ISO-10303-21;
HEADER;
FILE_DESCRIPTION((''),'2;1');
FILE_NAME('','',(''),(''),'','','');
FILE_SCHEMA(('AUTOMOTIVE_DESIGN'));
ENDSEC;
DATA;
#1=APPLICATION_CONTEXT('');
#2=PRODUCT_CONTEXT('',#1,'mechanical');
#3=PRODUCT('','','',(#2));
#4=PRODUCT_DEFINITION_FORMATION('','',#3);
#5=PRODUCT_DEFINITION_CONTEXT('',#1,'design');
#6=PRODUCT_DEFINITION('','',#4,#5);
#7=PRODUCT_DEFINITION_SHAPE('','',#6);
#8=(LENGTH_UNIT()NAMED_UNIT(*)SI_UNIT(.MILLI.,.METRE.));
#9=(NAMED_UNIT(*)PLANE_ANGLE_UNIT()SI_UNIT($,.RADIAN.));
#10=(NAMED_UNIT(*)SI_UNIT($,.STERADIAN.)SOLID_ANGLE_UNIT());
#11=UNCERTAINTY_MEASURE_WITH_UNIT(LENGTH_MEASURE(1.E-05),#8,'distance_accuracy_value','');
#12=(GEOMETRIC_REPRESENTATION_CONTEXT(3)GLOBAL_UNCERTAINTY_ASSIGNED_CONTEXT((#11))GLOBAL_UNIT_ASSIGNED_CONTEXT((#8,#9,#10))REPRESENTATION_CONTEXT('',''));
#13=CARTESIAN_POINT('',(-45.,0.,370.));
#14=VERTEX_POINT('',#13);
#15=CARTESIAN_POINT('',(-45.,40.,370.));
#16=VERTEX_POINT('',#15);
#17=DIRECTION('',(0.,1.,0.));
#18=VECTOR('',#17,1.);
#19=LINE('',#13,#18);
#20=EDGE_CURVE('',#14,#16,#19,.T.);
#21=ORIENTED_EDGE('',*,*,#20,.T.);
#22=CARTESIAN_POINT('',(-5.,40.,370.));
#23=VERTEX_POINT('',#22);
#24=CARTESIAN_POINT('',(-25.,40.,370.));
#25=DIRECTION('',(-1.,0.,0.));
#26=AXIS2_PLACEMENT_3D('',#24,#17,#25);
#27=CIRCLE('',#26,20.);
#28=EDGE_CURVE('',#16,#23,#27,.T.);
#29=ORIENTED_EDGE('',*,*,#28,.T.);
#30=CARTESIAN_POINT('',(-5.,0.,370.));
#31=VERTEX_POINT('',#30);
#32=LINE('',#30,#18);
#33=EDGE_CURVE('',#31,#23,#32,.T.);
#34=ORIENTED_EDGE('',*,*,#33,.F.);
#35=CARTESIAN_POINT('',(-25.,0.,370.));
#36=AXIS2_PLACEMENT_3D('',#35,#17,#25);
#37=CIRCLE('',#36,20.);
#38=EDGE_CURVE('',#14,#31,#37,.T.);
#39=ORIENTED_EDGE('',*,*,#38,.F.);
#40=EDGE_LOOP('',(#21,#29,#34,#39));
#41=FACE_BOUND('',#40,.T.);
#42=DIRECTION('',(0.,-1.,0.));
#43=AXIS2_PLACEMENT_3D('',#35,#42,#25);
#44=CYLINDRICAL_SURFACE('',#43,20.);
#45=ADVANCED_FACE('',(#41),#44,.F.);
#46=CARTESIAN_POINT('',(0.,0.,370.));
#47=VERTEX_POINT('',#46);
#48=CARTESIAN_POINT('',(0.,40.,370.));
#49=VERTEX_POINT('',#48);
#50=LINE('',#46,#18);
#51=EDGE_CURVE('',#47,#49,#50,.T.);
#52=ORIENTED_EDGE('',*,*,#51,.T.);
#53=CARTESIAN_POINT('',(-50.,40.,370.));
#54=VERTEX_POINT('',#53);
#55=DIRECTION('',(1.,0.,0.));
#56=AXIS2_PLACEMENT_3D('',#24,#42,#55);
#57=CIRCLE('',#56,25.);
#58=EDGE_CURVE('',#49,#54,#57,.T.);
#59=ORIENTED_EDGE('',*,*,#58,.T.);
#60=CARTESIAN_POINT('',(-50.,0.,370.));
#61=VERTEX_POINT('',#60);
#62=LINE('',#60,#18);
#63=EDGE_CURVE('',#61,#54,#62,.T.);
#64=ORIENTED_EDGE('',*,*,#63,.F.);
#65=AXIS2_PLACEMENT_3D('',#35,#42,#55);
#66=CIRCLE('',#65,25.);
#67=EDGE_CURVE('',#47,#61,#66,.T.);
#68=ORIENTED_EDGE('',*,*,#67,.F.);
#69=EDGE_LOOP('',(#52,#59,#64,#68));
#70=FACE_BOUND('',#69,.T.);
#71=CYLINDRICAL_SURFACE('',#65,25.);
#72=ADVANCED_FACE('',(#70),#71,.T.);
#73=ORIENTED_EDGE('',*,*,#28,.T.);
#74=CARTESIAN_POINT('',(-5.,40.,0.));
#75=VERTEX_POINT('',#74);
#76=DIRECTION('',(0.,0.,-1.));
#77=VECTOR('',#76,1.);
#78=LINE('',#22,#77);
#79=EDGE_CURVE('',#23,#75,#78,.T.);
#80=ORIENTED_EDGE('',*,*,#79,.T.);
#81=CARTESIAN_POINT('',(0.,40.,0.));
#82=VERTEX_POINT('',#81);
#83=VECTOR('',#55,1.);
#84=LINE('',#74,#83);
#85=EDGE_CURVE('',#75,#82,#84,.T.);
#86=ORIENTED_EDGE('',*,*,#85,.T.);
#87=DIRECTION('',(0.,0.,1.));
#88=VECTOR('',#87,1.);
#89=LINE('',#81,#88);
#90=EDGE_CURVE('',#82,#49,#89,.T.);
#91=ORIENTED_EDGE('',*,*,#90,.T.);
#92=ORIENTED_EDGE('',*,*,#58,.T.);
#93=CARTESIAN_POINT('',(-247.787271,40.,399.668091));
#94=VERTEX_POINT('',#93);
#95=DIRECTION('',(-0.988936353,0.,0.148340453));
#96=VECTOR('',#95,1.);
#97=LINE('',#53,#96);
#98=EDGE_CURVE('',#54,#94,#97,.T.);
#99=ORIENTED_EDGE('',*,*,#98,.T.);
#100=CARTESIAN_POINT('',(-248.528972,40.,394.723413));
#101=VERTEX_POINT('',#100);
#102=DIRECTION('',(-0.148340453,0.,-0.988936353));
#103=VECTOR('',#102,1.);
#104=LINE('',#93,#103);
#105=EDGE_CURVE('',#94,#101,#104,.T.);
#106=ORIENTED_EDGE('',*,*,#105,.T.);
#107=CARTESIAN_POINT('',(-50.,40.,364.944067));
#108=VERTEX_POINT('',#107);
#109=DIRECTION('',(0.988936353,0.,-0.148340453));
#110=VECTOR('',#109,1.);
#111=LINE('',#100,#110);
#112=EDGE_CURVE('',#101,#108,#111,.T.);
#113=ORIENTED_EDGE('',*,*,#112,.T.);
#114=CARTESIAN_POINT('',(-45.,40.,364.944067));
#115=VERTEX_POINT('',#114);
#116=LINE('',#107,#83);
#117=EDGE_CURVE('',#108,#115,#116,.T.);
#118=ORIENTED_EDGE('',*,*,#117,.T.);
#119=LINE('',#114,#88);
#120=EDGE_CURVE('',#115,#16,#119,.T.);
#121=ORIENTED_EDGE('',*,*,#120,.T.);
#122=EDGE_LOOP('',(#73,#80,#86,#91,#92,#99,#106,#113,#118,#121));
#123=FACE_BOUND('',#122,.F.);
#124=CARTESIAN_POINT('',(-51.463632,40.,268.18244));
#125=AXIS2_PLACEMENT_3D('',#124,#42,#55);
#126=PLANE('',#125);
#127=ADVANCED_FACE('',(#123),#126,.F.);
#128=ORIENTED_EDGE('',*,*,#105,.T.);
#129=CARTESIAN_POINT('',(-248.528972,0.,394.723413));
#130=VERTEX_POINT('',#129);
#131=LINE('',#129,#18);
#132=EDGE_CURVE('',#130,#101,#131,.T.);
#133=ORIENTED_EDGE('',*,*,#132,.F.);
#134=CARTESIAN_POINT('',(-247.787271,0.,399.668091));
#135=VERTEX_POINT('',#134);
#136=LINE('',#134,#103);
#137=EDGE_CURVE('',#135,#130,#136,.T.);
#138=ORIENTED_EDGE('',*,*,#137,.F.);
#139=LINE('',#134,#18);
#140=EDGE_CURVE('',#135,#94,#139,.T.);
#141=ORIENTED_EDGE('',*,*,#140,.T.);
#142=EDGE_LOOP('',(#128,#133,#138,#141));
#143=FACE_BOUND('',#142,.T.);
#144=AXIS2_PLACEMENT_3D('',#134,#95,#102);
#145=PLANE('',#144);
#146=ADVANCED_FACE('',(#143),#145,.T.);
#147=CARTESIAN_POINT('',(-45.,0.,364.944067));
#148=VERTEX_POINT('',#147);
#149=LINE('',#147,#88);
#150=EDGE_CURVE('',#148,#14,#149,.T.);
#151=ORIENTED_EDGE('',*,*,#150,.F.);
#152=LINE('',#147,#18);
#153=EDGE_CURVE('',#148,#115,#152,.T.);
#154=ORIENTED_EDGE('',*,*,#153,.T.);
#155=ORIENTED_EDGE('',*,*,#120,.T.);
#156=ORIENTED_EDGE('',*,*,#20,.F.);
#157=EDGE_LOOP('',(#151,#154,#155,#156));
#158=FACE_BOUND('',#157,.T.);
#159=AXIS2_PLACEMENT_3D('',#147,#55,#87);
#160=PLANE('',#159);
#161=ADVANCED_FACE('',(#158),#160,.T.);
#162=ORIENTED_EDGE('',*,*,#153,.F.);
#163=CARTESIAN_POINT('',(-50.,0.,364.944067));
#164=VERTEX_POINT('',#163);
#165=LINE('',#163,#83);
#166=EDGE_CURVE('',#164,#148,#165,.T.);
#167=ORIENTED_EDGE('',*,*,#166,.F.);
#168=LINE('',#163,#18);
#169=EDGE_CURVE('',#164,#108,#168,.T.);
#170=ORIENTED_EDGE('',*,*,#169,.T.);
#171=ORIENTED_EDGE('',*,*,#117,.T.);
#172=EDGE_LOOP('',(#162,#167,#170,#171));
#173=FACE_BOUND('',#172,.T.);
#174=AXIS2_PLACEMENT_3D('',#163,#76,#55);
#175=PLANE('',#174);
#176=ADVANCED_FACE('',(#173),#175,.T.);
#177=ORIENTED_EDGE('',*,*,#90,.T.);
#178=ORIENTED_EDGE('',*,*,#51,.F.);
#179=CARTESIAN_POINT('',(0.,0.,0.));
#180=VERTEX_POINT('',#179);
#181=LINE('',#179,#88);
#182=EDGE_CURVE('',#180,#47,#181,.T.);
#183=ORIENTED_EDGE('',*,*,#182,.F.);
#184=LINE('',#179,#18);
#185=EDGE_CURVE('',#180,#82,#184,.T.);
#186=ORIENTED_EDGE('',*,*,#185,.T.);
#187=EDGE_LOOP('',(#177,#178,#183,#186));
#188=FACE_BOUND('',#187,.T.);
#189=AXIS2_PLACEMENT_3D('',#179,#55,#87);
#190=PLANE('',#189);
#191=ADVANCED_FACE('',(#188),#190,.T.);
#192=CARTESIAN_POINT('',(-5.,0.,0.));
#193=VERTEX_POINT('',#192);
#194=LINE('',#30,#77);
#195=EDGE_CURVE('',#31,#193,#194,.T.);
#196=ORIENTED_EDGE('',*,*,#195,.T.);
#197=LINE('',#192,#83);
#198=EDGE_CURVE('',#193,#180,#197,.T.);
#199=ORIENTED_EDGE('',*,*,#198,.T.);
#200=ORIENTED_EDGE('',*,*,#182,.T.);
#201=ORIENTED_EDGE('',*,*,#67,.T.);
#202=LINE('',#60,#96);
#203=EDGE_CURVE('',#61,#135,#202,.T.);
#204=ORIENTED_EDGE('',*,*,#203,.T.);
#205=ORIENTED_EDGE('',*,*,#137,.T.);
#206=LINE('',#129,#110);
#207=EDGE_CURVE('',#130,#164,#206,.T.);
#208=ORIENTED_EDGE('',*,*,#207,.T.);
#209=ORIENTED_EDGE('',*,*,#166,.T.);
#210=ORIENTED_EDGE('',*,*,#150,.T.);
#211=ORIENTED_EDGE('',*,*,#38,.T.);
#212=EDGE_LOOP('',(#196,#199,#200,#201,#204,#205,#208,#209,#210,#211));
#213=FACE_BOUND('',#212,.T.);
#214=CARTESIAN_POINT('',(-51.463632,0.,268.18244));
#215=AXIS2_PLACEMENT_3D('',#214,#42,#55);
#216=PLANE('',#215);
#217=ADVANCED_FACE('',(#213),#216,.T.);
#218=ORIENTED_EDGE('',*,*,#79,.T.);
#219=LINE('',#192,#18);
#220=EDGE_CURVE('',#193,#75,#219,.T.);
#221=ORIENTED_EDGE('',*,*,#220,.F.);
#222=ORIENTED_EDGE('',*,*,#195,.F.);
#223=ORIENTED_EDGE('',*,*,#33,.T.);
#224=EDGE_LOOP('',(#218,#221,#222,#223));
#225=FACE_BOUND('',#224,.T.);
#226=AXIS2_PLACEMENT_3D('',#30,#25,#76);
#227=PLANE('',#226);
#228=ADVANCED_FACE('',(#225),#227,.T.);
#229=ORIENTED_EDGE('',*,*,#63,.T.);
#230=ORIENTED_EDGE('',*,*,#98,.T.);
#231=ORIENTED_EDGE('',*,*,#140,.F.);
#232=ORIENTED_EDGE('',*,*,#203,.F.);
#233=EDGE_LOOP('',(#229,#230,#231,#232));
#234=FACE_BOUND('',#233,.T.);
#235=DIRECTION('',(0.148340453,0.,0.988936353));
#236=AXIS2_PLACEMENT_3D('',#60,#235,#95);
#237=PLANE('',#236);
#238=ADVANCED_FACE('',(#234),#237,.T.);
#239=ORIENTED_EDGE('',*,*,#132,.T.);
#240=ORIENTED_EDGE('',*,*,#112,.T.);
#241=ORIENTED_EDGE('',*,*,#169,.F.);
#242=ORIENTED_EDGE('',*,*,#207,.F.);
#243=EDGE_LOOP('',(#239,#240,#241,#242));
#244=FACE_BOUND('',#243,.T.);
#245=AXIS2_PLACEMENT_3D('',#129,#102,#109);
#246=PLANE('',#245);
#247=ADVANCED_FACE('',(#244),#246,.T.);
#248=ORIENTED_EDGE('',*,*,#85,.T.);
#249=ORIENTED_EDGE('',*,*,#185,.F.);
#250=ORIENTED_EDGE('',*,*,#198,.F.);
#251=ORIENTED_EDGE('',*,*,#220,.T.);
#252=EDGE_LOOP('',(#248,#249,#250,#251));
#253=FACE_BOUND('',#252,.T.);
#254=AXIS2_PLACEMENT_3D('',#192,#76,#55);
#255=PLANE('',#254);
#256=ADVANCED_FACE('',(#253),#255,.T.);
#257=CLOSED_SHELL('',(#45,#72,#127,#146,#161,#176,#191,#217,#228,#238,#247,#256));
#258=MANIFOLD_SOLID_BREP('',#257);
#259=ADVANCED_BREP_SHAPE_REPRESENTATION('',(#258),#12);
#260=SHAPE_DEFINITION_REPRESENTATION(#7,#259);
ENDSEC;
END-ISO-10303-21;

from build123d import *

# Parameters (mm, degrees)
F1_DEPTH = 40


# Not quite as in the source:
# - ends of sketch curves that miss each other by under 0.0002 mm in the source are joined


with BuildPart() as f1:
    # F0 (on Front) → F1 (new body)
    with BuildSketch(Plane.XZ):
        with BuildLine():
            Line((-4.9999998882, 0), (0, 0))
            Line((0, 0), (0, 370))
            ThreePointArc((0, 370), (-25, 395), (-50, 370))
            Line((-50, 370), (-247.7872705737, 399.6680905861))
            Line((-247.7872705737, 399.6680905861), (-248.5289721923, 394.7234131282))
            Line((-248.5289721923, 394.7234131282), (-50, 364.9440672994))
            Line((-50, 364.9440672994), (-45, 364.9440672994))
            Line((-45, 364.9440672994), (-45, 370))
            ThreePointArc((-45, 370), (-25, 390), (-5, 370))
            Line((-5, 370), (-4.9999998882, 0))
        make_face()
    extrude(amount=-F1_DEPTH)


solid = f1.part
